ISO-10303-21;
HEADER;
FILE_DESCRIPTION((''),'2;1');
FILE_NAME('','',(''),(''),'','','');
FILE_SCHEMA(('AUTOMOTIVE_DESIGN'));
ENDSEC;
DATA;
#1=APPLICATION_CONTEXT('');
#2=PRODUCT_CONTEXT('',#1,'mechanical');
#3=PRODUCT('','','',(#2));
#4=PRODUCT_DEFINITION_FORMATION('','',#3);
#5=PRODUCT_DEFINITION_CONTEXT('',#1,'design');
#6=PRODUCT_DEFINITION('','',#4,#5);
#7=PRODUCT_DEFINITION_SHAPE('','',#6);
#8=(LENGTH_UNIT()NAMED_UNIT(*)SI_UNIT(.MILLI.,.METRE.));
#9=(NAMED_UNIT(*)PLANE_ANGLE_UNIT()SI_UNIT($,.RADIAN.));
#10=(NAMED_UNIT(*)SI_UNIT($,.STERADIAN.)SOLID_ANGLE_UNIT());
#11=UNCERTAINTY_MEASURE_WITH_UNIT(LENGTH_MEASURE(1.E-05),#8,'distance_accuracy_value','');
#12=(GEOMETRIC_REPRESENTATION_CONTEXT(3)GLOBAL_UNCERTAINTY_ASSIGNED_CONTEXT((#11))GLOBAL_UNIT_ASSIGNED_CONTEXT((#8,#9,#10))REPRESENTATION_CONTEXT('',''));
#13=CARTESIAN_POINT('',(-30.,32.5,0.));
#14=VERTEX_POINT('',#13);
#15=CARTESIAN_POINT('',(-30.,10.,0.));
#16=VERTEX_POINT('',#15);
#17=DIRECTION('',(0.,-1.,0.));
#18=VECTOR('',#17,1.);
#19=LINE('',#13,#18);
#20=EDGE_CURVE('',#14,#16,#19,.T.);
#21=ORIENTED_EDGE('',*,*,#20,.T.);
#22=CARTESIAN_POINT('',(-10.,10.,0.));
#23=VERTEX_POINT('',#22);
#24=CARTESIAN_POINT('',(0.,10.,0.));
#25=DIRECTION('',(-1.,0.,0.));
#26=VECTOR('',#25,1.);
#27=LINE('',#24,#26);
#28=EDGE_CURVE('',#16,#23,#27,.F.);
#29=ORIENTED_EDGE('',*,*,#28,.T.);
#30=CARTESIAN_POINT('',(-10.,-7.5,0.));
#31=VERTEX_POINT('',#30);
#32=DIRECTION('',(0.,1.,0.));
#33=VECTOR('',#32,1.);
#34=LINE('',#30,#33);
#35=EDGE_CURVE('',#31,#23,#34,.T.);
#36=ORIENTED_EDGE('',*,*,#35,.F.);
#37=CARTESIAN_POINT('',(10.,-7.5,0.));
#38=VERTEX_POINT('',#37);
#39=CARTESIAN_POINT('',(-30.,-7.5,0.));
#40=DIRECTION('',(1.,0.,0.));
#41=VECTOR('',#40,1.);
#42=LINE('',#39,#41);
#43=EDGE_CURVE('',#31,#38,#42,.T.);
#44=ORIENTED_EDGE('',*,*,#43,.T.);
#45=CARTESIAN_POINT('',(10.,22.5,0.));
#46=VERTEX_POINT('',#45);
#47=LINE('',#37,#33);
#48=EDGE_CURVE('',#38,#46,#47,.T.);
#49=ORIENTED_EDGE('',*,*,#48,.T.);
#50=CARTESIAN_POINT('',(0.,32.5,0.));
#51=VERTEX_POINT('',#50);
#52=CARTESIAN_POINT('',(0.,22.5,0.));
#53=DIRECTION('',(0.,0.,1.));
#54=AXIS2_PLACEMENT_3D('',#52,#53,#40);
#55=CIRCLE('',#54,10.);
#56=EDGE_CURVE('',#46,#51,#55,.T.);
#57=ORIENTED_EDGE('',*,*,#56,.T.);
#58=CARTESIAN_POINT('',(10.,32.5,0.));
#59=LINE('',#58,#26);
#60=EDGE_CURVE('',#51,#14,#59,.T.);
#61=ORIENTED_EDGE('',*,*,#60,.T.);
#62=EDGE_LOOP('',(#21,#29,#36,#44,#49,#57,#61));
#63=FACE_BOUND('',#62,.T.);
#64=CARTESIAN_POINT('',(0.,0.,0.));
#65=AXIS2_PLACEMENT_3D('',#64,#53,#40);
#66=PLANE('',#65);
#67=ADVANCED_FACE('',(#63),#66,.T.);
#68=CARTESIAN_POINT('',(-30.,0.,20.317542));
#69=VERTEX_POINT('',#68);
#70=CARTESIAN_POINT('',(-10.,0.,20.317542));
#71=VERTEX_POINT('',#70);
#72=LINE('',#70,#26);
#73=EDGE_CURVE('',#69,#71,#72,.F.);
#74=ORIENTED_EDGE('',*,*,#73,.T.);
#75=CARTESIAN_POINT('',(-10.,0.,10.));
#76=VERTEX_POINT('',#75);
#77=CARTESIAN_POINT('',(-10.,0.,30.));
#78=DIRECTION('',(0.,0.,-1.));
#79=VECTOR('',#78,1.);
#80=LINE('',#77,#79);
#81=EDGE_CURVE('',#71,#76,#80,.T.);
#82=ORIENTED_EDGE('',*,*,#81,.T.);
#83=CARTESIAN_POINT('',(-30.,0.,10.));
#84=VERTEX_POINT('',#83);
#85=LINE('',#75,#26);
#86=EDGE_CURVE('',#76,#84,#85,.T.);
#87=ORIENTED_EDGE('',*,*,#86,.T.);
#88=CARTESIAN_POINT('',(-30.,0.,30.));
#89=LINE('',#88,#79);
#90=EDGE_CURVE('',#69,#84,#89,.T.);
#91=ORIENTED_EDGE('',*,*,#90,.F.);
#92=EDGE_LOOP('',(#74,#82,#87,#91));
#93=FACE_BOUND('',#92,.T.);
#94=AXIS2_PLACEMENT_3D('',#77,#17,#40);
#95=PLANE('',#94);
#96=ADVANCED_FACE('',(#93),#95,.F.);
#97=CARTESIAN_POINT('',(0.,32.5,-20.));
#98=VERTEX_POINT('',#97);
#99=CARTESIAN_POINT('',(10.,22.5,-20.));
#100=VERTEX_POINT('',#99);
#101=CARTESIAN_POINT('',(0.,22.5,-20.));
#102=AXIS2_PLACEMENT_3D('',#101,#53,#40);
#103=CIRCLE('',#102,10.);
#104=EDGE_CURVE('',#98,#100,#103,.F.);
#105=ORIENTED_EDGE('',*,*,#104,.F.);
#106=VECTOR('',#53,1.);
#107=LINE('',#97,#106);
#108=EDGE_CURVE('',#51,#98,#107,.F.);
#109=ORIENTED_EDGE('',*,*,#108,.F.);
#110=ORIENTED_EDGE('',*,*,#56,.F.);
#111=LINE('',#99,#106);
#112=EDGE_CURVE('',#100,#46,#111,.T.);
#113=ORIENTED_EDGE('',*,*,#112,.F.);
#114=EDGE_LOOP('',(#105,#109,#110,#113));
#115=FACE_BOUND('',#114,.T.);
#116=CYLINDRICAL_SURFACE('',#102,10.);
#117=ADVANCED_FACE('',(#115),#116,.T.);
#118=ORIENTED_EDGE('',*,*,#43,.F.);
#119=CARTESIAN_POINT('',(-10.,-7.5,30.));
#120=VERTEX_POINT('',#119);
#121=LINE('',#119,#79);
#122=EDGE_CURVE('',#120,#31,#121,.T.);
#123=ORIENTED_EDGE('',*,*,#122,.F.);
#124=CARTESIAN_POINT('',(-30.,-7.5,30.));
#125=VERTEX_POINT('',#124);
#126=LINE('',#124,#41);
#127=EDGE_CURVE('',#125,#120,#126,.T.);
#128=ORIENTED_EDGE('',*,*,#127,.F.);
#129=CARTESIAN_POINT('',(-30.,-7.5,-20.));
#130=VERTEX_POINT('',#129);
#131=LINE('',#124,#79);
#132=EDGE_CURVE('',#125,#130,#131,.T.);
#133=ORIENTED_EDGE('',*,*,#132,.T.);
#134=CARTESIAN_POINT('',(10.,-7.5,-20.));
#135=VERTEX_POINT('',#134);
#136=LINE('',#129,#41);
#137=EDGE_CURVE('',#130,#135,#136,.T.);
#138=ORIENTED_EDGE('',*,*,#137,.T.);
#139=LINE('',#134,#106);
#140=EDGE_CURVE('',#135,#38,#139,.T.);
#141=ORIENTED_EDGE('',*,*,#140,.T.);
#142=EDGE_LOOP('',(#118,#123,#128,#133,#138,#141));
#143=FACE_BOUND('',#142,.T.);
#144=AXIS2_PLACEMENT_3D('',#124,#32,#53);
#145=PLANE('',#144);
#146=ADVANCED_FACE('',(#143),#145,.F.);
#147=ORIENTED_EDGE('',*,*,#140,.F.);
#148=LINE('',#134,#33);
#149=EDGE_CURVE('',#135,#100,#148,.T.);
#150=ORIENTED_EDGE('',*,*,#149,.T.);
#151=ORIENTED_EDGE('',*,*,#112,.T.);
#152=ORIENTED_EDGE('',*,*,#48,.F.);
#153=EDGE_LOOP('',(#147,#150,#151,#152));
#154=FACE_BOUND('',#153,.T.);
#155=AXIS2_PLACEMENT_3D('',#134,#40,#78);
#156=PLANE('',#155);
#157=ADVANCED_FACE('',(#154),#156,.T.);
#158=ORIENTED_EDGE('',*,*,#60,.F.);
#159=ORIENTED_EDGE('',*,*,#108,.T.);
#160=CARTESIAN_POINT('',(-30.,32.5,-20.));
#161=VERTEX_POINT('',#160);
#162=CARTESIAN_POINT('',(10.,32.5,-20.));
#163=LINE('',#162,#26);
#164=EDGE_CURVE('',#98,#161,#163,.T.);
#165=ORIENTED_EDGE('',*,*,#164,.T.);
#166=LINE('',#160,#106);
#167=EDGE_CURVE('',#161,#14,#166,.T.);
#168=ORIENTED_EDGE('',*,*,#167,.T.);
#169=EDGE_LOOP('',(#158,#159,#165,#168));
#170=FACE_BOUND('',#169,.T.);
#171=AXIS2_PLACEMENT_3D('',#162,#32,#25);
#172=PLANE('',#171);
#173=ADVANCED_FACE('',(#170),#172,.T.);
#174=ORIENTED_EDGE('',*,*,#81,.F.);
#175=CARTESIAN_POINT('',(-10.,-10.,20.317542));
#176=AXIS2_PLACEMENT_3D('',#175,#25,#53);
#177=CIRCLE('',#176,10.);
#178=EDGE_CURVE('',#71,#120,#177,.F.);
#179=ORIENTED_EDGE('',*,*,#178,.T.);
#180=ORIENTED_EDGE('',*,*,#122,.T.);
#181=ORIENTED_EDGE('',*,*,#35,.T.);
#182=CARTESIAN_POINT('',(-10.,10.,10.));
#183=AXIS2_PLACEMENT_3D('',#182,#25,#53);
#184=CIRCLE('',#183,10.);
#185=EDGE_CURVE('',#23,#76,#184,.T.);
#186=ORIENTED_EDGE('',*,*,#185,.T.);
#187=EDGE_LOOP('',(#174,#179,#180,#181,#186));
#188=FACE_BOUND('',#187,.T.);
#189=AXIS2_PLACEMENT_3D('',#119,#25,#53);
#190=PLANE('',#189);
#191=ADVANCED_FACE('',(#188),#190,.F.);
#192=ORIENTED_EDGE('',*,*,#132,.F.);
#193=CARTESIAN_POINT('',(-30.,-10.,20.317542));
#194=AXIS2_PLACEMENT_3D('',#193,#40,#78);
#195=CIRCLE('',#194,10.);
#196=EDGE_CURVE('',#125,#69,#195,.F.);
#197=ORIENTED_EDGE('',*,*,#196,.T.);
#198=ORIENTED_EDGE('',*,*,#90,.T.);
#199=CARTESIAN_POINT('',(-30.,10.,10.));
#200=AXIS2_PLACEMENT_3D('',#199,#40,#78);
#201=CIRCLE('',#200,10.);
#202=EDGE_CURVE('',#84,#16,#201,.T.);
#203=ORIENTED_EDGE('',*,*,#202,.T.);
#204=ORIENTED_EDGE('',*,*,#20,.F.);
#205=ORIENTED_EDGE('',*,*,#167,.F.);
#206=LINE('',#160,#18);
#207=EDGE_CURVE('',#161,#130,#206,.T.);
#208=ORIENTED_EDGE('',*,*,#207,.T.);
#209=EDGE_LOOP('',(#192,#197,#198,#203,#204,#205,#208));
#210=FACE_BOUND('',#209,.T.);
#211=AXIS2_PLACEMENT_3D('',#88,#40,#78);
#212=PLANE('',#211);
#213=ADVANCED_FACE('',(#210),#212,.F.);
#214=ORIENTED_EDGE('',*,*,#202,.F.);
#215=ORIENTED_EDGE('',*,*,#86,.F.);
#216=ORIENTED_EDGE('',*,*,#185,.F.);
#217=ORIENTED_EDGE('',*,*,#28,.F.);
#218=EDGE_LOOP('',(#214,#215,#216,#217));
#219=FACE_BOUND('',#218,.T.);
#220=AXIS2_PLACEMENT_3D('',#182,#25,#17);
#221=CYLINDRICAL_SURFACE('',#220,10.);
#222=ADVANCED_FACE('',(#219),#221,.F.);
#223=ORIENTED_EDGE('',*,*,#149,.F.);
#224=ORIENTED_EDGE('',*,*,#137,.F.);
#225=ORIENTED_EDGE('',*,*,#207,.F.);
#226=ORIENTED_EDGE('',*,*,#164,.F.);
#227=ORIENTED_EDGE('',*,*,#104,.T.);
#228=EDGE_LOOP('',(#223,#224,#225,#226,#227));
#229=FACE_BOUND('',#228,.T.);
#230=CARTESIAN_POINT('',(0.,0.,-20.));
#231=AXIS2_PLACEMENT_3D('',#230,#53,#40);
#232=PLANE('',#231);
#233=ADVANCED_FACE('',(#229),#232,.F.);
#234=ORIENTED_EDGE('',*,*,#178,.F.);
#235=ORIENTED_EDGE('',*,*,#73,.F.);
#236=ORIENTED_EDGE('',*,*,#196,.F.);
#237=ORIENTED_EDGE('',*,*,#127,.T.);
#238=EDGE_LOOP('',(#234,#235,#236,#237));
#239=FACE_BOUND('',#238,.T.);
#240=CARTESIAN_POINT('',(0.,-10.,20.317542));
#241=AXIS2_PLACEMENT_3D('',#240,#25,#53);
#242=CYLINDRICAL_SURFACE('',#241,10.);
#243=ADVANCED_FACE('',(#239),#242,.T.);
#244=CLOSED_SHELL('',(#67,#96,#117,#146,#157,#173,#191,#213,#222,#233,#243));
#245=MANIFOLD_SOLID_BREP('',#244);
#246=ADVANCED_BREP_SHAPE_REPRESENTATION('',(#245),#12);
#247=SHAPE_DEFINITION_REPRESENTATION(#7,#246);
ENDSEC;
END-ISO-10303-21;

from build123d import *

# Parameters (mm, degrees)
SKETCH1_W           = 20
SKETCH1_H           = 7.5
BOSS_EXTRUDE1_DEPTH = 30
SKETCH2_W           = 40
SKETCH2_H           = 40
BOSS_EXTRUDE2_DEPTH = 20
FILLET1_R           = 10


with BuildPart() as part:
    # Sketch1 → Boss-Extrude1 (new body)
    with BuildSketch(Plane.XY):
        with Locations((-20, -3.75)):
            Rectangle(SKETCH1_W, SKETCH1_H)
    extrude(amount=BOSS_EXTRUDE1_DEPTH)

    # Sketch2 → Boss-Extrude2 (add)
    with BuildSketch(Plane.XY):
        with Locations((-10, 12.5)):
            Rectangle(SKETCH2_W, SKETCH2_H)
    extrude(amount=-BOSS_EXTRUDE2_DEPTH)

    # Fillet1
    # the kernel refuses this fillet: 10 mm, written as the material it adds along each edge
    with BuildSketch(Plane(origin=(-10, 0, 0), x_dir=(0, 1, 0), z_dir=(-1, 0, 0))) as fillet1_piece_1:
        with BuildLine():
            CenterArc((FILLET1_R, -FILLET1_R), FILLET1_R, 90, 90)
            Line((0, -FILLET1_R), (0, 0))
            Line((0, 0), (FILLET1_R, 0))
        make_face()
    extrude(amount=20)
    # the kernel refuses this fillet: 10 mm, written as the material it takes off along each edge
    with BuildSketch(Plane(origin=(10, 32.5, 25), x_dir=(-1, 0, 0), z_dir=(0, 0, -1))) as fillet1_2_piece_1:
        with BuildLine():
            CenterArc((FILLET1_R, -FILLET1_R), FILLET1_R, 90, 90)
            Line((0, -FILLET1_R), (0, 0))
            Line((0, 0), (FILLET1_R, 0))
        make_face()
    extrude(amount=70, mode=Mode.SUBTRACT)
    with BuildSketch(Plane(origin=(14.206145914, 0, 30), x_dir=(0, 0, -1), z_dir=(-1, 0, 0))) as fillet1_2_piece_2:
        with BuildLine():
            CenterArc((9.682458366, 10), FILLET1_R, 194.477512186, 75.522487814)
            Line((0, 7.5), (0, 0))
            Line((0, 0), (9.682458366, 0))
        make_face()
    extrude(amount=68.412291828, mode=Mode.SUBTRACT)


solid = part.part
